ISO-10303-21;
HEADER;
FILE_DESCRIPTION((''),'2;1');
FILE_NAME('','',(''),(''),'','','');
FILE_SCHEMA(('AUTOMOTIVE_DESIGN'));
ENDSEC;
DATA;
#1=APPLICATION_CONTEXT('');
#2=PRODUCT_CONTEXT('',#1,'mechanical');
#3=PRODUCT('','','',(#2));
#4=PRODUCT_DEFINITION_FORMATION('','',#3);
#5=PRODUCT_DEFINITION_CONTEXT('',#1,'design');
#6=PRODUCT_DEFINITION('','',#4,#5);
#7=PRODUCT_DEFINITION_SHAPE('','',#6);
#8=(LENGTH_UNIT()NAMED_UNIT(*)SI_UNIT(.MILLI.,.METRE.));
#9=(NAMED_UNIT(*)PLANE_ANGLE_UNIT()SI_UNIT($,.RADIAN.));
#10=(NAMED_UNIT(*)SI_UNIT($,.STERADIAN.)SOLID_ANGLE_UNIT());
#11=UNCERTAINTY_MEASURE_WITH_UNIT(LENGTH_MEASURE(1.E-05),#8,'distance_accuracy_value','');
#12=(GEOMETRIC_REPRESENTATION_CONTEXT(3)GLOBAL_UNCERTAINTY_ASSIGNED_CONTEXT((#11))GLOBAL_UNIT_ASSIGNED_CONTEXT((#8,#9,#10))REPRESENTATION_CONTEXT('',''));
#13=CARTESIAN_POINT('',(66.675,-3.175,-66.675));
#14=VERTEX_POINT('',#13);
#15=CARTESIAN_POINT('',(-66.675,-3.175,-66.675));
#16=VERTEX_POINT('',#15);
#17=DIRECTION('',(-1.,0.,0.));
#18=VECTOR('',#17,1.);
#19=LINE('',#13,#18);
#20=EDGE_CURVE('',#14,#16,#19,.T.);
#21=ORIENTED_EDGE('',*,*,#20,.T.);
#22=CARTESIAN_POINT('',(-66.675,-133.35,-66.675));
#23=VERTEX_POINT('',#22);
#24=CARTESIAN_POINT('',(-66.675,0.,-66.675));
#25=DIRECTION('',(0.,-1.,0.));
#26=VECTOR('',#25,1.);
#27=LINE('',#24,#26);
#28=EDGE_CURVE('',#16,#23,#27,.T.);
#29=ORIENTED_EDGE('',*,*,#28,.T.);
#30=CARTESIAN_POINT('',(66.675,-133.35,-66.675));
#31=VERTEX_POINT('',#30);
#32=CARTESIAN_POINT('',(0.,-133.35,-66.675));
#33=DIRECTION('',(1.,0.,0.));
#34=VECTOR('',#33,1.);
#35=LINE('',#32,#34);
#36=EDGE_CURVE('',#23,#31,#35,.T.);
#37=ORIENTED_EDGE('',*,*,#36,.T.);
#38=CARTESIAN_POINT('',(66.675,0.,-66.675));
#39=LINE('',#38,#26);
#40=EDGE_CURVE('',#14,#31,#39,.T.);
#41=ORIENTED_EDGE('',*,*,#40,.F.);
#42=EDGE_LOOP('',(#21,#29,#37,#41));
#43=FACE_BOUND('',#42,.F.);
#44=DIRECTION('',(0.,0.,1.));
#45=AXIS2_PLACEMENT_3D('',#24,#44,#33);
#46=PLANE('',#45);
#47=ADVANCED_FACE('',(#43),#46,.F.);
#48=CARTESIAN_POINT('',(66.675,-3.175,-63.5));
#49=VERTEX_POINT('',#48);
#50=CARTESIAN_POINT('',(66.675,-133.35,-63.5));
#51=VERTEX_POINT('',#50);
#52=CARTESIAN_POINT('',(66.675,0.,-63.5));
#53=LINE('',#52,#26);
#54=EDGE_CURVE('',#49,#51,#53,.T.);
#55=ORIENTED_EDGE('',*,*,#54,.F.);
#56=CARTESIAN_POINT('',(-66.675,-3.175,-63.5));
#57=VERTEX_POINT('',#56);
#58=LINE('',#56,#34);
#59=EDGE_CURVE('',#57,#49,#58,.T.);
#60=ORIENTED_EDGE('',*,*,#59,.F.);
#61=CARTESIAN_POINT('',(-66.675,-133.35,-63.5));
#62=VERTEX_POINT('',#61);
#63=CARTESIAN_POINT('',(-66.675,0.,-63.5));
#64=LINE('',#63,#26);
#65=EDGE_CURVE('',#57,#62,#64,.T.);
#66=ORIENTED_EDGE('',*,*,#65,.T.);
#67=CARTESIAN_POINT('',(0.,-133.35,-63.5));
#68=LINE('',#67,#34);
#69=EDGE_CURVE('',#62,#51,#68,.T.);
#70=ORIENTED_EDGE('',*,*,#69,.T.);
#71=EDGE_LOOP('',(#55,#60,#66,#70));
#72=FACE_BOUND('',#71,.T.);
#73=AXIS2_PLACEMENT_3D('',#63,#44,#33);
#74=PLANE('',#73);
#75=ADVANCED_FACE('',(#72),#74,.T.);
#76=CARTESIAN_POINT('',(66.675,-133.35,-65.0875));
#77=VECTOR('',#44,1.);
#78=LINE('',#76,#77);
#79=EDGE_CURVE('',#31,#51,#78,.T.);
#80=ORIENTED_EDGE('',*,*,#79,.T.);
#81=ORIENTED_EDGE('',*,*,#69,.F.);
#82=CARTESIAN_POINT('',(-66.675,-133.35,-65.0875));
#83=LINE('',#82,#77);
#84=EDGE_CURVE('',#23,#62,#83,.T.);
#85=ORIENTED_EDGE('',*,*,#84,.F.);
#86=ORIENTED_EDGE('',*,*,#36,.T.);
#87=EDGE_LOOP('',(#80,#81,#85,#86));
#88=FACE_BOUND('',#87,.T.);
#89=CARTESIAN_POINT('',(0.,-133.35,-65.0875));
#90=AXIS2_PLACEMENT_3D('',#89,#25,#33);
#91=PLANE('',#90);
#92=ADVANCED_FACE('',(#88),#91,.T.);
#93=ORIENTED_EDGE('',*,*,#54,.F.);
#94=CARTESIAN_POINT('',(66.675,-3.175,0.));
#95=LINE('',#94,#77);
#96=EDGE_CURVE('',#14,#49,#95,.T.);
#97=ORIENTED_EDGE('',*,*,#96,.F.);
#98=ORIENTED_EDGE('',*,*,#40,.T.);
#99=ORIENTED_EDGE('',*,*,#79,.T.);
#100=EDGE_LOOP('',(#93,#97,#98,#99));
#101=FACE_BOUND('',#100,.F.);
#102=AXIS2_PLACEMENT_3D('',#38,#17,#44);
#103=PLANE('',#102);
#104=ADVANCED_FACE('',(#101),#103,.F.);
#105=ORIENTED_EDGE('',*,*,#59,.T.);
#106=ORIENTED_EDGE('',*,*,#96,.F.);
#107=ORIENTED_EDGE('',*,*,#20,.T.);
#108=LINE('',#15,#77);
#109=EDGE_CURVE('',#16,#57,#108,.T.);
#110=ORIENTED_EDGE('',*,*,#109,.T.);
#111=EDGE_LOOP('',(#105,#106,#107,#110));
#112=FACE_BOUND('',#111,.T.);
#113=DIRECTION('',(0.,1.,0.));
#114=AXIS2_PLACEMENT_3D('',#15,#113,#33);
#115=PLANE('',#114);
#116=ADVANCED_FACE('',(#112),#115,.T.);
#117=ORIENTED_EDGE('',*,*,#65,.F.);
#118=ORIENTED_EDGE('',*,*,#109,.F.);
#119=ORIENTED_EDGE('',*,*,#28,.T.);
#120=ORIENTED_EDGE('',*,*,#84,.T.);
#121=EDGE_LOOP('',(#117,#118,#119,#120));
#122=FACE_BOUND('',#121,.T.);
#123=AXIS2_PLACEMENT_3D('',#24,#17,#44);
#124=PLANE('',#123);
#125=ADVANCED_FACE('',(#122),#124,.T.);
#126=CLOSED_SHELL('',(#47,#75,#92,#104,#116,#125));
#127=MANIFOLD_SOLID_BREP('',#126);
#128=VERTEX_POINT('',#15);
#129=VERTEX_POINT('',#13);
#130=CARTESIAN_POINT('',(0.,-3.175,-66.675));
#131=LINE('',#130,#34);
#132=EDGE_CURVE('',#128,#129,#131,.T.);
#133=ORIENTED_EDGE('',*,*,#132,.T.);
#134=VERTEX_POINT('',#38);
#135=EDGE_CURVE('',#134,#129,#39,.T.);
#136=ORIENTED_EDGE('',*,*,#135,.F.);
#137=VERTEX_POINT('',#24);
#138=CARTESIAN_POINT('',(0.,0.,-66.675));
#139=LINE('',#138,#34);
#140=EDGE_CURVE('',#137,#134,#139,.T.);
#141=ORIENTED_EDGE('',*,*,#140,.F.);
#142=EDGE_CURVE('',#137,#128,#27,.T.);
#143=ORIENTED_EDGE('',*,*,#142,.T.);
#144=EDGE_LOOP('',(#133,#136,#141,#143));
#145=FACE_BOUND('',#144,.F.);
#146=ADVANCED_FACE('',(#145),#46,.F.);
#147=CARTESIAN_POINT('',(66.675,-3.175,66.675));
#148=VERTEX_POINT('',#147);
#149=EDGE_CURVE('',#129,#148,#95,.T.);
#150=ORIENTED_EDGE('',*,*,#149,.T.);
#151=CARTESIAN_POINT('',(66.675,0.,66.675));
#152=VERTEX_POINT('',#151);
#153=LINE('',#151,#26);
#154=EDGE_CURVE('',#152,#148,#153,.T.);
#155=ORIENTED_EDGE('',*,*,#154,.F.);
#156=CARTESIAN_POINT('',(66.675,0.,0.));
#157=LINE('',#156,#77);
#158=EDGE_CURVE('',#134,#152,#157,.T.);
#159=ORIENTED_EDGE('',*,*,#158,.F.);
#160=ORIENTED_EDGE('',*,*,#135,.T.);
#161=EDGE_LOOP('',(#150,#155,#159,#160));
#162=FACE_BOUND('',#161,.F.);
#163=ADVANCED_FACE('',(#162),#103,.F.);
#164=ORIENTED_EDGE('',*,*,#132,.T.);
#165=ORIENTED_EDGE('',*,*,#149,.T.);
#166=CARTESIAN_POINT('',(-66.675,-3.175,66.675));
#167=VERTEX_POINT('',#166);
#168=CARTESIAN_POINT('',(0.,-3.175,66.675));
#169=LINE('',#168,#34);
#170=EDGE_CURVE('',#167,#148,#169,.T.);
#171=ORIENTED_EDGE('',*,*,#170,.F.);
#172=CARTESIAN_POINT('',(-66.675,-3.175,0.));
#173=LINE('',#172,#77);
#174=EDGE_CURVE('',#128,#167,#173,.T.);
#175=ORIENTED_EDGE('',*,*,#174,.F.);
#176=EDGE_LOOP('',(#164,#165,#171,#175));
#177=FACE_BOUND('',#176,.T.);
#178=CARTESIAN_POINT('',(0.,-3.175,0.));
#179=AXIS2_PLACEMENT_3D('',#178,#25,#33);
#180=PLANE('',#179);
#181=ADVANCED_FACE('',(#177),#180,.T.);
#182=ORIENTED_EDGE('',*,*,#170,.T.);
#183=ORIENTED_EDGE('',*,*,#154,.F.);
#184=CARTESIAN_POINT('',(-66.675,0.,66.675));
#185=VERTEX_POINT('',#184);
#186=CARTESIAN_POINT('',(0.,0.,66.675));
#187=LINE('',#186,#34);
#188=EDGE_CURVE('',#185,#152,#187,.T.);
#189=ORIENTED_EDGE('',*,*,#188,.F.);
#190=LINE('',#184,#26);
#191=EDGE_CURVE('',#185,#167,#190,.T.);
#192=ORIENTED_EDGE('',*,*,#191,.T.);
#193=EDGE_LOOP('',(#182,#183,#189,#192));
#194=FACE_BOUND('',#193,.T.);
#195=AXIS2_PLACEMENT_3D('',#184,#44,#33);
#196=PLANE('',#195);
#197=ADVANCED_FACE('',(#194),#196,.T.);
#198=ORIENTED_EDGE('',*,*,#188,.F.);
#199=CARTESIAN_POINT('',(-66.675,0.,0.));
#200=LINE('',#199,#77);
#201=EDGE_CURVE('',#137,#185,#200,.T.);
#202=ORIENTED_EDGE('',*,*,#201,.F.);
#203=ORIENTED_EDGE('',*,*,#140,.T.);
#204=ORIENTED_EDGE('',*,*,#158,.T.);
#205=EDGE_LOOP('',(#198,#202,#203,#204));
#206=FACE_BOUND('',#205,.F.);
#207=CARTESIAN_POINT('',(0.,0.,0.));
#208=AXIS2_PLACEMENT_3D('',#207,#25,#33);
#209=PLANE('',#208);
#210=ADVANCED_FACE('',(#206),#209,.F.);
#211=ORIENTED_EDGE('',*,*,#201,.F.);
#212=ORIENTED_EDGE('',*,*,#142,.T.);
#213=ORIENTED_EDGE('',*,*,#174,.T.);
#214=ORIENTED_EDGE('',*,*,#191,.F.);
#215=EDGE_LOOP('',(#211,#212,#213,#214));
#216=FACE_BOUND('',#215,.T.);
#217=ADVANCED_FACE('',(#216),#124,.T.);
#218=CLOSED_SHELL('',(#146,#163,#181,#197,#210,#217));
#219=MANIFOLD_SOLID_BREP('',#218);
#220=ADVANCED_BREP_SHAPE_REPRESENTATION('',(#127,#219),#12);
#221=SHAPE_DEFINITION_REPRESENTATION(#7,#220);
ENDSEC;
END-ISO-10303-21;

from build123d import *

# Parameters (mm, degrees)
F0_W     = 133.35
F0_H     = 133.35
F1_DEPTH = 3.175
F2_W     = 133.35
F2_H     = 3.175
F3_DEPTH = 133.35
F4_W     = 25.4
F4_H     = 3.175
F5_DEPTH = 3.175


with BuildPart() as f1:
    # F0 (on Front) → F1 (new body)
    with BuildSketch(Plane.XZ):
        Rectangle(F0_W, F0_H)
    extrude(amount=F1_DEPTH)


with BuildPart() as f3:
    # F2 (on face) → F3 (new body)
    with BuildSketch(Plane.XZ):
        with Locations((0, -65.0875)):
            Rectangle(F2_W, F2_H)
    extrude(amount=F3_DEPTH)

    # F4 (on face) → F5 (cut)
    with BuildSketch(Plane(origin=(0, 0, -66.675), x_dir=(1, 0, 0), z_dir=(0, 0, -1))):
        with Locations((-53.975, 1.5875)):
            Rectangle(F4_W, F4_H)
        with Locations((-7.62, 1.5875)):
            Rectangle(F4_W, F4_H)
        with Locations((38.735, 1.5875)):
            Rectangle(F4_W, F4_H)
    extrude(amount=-F5_DEPTH, mode=Mode.SUBTRACT)

    # F6: cut F1
    add(f1.part, mode=Mode.SUBTRACT)


solid = Compound([f1.part, f3.part])
